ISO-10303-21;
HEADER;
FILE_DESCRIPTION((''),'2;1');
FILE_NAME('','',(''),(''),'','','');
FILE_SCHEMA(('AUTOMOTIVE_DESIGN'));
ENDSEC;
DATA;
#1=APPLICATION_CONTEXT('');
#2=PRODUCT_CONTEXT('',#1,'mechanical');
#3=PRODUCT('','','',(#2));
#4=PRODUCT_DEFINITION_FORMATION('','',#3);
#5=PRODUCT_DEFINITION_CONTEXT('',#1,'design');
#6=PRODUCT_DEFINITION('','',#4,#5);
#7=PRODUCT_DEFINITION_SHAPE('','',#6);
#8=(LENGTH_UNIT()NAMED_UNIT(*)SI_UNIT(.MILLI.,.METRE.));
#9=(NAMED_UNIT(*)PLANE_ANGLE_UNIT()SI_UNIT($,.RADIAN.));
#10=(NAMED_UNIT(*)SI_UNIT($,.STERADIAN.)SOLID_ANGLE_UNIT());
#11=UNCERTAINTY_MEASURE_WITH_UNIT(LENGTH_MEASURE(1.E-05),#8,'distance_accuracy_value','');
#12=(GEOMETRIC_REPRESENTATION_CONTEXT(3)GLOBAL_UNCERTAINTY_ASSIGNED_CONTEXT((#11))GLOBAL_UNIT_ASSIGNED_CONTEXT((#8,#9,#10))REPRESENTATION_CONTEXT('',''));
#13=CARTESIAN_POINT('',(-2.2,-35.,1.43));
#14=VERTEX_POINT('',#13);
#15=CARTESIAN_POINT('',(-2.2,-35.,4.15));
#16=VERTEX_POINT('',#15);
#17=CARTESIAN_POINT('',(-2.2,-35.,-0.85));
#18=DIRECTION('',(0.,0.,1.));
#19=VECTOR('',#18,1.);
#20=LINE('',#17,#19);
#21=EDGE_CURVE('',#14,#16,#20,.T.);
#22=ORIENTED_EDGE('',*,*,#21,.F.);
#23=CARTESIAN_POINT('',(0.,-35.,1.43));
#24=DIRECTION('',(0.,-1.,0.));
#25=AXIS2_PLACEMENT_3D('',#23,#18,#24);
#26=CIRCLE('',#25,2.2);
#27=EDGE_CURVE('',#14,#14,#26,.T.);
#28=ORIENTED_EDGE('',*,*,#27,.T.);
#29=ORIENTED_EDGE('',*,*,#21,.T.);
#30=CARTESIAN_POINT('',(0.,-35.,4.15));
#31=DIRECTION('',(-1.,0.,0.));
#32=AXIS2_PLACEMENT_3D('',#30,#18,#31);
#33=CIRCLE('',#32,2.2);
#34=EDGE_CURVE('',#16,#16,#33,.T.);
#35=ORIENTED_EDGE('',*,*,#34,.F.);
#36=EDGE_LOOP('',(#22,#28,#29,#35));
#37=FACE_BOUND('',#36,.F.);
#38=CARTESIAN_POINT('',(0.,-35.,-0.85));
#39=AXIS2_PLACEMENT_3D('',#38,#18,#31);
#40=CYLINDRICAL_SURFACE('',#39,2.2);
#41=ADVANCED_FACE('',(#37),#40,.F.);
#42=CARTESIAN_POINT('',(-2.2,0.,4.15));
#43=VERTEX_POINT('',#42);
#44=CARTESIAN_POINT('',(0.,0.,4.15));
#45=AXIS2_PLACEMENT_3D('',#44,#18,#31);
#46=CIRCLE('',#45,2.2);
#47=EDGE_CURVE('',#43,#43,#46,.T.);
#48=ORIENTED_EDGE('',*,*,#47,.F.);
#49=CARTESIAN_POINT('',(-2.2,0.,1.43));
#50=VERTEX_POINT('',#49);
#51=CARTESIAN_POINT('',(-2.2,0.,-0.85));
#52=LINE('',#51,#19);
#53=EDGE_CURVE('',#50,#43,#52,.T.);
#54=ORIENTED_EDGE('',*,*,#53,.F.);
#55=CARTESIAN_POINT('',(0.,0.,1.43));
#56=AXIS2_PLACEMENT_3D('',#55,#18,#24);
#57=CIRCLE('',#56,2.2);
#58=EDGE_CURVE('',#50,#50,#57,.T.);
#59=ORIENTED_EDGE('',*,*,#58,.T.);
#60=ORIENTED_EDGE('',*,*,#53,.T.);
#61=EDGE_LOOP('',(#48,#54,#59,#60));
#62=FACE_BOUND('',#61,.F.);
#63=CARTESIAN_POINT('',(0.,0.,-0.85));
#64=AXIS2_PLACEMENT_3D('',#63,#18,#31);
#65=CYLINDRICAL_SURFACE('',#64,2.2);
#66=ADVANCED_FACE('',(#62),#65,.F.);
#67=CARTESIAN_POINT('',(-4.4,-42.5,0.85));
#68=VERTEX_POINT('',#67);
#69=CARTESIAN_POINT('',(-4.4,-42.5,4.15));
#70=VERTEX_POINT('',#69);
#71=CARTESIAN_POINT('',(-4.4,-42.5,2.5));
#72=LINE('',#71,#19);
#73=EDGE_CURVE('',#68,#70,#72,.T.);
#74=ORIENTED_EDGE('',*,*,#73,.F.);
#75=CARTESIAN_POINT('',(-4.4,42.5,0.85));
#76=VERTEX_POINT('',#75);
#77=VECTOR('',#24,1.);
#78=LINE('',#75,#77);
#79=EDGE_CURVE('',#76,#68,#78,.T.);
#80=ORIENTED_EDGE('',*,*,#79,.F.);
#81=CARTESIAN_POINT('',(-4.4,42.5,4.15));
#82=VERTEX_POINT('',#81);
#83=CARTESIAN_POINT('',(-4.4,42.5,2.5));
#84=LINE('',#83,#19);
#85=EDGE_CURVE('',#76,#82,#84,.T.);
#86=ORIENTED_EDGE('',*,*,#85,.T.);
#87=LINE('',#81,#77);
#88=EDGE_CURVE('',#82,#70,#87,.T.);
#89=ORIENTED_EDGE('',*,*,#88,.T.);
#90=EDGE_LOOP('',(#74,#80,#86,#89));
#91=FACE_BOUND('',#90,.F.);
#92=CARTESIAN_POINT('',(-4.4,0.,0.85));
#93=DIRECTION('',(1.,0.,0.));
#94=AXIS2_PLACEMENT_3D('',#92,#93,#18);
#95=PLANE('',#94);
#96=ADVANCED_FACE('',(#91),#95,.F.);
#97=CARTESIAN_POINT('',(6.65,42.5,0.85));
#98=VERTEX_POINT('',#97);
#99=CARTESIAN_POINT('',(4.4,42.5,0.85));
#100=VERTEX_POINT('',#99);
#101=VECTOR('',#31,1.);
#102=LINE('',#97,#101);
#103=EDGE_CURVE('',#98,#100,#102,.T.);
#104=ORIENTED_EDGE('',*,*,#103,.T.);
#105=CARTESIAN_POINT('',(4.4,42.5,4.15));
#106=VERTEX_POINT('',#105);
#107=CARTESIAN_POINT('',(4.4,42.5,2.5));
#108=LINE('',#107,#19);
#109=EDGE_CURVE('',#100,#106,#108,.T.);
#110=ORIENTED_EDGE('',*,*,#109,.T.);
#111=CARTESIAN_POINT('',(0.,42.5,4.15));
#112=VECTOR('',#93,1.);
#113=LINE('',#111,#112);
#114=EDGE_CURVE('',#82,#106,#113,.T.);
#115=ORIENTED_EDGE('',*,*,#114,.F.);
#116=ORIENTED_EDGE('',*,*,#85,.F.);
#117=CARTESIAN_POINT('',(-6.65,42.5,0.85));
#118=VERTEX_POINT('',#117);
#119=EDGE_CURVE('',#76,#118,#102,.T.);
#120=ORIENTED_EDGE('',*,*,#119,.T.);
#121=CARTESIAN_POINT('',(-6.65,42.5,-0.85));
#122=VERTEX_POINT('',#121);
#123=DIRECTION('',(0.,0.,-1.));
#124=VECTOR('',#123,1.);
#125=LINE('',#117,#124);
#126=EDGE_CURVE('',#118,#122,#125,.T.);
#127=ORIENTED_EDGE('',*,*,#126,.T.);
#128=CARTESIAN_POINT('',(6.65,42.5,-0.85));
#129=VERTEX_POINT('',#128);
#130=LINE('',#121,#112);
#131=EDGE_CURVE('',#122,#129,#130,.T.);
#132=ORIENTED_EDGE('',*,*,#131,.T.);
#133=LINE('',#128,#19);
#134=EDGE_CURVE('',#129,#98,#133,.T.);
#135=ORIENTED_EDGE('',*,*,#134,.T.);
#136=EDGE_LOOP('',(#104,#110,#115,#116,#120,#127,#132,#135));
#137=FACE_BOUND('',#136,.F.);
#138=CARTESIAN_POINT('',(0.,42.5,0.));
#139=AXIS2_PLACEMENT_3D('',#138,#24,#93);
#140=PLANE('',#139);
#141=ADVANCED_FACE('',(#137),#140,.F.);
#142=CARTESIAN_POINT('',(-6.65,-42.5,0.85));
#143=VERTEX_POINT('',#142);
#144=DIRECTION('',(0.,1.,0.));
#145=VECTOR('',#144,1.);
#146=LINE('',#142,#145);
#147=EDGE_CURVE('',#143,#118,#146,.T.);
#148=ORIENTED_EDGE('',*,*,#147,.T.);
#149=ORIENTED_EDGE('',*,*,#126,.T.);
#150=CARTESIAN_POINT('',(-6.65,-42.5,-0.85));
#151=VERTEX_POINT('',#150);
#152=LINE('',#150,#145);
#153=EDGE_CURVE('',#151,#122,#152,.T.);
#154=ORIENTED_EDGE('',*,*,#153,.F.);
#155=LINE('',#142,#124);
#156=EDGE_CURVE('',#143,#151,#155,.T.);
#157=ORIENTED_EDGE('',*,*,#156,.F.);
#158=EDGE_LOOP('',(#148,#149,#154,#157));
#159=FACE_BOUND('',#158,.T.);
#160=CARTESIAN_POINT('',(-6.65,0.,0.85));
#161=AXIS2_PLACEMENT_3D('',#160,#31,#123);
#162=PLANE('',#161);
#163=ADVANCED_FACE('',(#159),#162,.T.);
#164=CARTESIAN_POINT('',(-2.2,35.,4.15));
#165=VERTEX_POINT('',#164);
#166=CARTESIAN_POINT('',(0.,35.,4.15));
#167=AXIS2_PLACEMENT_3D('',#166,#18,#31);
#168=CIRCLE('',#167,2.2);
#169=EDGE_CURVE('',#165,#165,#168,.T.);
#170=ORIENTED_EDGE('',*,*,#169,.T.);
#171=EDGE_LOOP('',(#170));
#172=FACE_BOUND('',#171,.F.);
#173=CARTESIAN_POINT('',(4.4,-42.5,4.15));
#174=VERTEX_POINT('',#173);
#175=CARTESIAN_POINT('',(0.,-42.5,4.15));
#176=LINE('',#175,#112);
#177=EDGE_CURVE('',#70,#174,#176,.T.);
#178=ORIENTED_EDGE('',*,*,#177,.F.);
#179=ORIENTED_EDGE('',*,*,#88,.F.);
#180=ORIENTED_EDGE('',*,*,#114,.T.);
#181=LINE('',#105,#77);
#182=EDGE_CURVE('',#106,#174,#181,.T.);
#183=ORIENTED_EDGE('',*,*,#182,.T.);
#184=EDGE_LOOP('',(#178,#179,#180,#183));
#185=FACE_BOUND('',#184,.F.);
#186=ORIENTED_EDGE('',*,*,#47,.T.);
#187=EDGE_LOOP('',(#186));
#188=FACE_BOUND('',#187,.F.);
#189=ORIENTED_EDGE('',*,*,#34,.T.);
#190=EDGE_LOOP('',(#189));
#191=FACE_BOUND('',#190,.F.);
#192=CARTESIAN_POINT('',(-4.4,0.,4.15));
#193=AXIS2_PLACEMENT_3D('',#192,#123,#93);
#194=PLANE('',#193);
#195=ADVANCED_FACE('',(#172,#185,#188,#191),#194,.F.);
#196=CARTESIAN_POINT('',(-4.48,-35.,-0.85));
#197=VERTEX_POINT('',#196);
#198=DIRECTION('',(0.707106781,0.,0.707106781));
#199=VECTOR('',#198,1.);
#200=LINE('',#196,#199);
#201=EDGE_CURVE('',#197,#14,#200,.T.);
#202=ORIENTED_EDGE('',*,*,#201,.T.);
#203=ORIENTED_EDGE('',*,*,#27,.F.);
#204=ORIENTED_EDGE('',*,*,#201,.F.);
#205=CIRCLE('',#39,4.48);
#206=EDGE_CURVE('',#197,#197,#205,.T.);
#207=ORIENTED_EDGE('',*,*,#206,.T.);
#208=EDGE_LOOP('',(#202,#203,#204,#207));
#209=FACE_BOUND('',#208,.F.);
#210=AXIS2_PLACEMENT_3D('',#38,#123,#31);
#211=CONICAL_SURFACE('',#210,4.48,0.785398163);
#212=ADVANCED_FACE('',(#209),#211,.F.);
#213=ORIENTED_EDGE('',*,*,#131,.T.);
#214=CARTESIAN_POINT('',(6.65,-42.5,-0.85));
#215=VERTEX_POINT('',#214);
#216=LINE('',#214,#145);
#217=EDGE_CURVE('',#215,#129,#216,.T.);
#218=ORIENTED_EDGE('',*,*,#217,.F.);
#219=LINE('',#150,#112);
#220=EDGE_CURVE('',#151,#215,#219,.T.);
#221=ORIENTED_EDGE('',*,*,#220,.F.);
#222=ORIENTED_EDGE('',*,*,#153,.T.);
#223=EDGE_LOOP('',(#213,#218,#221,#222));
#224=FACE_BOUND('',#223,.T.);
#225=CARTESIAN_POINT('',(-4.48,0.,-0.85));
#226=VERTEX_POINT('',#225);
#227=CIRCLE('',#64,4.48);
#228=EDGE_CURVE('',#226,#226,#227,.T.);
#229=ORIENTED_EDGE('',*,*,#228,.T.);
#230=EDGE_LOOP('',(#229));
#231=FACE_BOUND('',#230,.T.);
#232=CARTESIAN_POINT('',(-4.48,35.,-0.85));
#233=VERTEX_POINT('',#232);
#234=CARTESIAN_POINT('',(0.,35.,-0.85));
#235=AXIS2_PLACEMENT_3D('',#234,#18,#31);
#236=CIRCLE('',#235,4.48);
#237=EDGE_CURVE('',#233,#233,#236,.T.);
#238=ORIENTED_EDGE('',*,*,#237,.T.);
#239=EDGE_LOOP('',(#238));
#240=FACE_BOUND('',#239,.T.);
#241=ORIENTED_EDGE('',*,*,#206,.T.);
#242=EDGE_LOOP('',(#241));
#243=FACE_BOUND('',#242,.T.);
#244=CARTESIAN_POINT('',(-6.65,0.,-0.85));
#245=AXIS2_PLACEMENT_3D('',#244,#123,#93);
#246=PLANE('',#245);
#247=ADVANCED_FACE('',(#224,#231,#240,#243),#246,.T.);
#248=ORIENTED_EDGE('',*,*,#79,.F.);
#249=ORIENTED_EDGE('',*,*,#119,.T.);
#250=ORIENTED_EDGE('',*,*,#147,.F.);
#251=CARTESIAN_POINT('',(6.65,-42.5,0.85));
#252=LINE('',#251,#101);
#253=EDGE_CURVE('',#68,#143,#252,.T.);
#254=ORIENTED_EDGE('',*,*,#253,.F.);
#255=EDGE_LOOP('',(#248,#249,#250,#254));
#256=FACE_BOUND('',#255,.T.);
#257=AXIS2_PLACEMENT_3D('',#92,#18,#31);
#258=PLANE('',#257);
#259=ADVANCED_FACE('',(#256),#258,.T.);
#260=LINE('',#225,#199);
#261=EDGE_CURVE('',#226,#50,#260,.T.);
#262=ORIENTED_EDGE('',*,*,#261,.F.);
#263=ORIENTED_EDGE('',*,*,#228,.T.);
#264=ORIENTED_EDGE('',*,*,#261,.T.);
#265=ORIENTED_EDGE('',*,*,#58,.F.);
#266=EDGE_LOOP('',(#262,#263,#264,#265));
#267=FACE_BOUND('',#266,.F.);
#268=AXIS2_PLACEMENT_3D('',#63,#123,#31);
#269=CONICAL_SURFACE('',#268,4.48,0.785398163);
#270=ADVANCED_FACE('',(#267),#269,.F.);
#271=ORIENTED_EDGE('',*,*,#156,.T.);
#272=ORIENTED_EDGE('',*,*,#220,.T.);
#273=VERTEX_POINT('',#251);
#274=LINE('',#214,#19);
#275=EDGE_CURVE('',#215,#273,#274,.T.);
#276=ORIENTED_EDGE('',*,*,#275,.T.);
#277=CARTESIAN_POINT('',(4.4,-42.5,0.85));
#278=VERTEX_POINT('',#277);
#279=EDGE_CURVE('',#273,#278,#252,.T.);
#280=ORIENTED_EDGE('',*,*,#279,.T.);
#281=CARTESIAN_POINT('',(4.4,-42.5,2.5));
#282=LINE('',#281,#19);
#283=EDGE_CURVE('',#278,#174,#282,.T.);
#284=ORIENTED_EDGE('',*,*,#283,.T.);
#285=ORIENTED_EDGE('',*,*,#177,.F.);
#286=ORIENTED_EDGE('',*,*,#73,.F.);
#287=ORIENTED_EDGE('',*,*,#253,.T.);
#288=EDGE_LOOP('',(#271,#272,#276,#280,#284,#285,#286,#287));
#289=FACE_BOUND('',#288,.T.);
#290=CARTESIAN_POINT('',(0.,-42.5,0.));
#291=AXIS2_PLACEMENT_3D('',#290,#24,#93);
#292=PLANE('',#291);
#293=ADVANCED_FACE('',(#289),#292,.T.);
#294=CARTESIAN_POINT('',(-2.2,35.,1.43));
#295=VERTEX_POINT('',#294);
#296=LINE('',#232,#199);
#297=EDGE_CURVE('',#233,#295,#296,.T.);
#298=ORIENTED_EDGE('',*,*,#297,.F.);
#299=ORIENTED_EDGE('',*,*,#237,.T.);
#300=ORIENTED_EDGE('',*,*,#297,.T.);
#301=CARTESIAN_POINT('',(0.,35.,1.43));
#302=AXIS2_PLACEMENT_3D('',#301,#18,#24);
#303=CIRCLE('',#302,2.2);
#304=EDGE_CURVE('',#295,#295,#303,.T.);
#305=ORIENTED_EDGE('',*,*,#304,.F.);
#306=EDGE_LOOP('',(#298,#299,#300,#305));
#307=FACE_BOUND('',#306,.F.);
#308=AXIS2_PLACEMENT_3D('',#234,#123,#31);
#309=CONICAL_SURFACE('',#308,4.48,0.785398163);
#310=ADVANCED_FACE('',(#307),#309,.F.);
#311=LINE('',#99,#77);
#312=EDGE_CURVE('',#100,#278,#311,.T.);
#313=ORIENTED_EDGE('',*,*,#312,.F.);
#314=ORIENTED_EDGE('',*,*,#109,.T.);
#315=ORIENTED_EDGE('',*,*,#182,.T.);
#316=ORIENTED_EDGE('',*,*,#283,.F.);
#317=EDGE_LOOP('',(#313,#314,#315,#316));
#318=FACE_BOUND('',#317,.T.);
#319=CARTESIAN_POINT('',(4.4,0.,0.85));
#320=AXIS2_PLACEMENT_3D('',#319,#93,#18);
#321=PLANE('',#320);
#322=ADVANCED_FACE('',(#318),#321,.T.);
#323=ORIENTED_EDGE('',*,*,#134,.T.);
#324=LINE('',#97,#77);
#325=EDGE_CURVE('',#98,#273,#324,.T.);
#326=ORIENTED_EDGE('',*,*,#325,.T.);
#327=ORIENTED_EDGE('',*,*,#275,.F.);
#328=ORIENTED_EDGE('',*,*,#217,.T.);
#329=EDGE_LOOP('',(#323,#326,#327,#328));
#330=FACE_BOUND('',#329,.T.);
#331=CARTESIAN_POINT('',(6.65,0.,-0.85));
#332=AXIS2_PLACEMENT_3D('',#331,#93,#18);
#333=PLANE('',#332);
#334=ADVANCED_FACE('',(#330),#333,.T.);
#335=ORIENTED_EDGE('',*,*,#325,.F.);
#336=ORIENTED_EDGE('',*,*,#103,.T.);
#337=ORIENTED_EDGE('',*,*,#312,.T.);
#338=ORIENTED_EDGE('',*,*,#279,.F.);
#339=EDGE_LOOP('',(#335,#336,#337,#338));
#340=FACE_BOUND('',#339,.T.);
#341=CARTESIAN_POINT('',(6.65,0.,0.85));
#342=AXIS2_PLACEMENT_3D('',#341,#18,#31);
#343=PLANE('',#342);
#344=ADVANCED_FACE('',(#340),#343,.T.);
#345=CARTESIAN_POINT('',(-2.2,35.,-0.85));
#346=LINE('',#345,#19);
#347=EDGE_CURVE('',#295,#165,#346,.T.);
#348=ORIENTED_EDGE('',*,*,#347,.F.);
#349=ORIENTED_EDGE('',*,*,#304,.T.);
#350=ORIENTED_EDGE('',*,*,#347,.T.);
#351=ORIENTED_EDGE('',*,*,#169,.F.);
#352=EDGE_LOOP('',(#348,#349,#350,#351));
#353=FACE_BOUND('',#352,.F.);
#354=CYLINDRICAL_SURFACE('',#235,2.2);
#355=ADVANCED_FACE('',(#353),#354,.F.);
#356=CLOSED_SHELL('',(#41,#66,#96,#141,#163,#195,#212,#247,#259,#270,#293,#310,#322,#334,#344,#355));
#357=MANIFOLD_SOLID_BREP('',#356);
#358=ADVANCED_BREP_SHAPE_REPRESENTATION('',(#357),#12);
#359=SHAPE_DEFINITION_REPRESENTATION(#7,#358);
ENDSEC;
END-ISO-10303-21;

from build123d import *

# Parameters (mm, degrees)
F0_W           = 8.8
F0_H           = 3.3
F1_DEPTH       = 42.5
F3_D           = 4.4
F3_CSINK_D     = 8.96
F3_CSINK_ANGLE = 90


with BuildPart() as f1:
    # F0 (on Front) → F1 (new body, symmetric)
    with BuildSketch(Plane.XZ):
        Polygon((6.65, -0.85), (6.65, 0.85), (4.4, 0.85), (-4.4, 0.85), (-6.65, 0.85), (-6.65, -0.85), align=None)
        with Locations((0, 2.5)):
            Rectangle(F0_W, F0_H)
    extrude(amount=F1_DEPTH, both=True)

    # F3 (through all)
    with Locations(Plane(origin=(0, 0, -0.85), x_dir=(1, 0, 0), z_dir=(0, 0, -1))):
        with Locations((0, -35), (0, 0), (0, 35)):
            CounterSinkHole(F3_D / 2, F3_CSINK_D / 2, counter_sink_angle=F3_CSINK_ANGLE)


solid = f1.part
